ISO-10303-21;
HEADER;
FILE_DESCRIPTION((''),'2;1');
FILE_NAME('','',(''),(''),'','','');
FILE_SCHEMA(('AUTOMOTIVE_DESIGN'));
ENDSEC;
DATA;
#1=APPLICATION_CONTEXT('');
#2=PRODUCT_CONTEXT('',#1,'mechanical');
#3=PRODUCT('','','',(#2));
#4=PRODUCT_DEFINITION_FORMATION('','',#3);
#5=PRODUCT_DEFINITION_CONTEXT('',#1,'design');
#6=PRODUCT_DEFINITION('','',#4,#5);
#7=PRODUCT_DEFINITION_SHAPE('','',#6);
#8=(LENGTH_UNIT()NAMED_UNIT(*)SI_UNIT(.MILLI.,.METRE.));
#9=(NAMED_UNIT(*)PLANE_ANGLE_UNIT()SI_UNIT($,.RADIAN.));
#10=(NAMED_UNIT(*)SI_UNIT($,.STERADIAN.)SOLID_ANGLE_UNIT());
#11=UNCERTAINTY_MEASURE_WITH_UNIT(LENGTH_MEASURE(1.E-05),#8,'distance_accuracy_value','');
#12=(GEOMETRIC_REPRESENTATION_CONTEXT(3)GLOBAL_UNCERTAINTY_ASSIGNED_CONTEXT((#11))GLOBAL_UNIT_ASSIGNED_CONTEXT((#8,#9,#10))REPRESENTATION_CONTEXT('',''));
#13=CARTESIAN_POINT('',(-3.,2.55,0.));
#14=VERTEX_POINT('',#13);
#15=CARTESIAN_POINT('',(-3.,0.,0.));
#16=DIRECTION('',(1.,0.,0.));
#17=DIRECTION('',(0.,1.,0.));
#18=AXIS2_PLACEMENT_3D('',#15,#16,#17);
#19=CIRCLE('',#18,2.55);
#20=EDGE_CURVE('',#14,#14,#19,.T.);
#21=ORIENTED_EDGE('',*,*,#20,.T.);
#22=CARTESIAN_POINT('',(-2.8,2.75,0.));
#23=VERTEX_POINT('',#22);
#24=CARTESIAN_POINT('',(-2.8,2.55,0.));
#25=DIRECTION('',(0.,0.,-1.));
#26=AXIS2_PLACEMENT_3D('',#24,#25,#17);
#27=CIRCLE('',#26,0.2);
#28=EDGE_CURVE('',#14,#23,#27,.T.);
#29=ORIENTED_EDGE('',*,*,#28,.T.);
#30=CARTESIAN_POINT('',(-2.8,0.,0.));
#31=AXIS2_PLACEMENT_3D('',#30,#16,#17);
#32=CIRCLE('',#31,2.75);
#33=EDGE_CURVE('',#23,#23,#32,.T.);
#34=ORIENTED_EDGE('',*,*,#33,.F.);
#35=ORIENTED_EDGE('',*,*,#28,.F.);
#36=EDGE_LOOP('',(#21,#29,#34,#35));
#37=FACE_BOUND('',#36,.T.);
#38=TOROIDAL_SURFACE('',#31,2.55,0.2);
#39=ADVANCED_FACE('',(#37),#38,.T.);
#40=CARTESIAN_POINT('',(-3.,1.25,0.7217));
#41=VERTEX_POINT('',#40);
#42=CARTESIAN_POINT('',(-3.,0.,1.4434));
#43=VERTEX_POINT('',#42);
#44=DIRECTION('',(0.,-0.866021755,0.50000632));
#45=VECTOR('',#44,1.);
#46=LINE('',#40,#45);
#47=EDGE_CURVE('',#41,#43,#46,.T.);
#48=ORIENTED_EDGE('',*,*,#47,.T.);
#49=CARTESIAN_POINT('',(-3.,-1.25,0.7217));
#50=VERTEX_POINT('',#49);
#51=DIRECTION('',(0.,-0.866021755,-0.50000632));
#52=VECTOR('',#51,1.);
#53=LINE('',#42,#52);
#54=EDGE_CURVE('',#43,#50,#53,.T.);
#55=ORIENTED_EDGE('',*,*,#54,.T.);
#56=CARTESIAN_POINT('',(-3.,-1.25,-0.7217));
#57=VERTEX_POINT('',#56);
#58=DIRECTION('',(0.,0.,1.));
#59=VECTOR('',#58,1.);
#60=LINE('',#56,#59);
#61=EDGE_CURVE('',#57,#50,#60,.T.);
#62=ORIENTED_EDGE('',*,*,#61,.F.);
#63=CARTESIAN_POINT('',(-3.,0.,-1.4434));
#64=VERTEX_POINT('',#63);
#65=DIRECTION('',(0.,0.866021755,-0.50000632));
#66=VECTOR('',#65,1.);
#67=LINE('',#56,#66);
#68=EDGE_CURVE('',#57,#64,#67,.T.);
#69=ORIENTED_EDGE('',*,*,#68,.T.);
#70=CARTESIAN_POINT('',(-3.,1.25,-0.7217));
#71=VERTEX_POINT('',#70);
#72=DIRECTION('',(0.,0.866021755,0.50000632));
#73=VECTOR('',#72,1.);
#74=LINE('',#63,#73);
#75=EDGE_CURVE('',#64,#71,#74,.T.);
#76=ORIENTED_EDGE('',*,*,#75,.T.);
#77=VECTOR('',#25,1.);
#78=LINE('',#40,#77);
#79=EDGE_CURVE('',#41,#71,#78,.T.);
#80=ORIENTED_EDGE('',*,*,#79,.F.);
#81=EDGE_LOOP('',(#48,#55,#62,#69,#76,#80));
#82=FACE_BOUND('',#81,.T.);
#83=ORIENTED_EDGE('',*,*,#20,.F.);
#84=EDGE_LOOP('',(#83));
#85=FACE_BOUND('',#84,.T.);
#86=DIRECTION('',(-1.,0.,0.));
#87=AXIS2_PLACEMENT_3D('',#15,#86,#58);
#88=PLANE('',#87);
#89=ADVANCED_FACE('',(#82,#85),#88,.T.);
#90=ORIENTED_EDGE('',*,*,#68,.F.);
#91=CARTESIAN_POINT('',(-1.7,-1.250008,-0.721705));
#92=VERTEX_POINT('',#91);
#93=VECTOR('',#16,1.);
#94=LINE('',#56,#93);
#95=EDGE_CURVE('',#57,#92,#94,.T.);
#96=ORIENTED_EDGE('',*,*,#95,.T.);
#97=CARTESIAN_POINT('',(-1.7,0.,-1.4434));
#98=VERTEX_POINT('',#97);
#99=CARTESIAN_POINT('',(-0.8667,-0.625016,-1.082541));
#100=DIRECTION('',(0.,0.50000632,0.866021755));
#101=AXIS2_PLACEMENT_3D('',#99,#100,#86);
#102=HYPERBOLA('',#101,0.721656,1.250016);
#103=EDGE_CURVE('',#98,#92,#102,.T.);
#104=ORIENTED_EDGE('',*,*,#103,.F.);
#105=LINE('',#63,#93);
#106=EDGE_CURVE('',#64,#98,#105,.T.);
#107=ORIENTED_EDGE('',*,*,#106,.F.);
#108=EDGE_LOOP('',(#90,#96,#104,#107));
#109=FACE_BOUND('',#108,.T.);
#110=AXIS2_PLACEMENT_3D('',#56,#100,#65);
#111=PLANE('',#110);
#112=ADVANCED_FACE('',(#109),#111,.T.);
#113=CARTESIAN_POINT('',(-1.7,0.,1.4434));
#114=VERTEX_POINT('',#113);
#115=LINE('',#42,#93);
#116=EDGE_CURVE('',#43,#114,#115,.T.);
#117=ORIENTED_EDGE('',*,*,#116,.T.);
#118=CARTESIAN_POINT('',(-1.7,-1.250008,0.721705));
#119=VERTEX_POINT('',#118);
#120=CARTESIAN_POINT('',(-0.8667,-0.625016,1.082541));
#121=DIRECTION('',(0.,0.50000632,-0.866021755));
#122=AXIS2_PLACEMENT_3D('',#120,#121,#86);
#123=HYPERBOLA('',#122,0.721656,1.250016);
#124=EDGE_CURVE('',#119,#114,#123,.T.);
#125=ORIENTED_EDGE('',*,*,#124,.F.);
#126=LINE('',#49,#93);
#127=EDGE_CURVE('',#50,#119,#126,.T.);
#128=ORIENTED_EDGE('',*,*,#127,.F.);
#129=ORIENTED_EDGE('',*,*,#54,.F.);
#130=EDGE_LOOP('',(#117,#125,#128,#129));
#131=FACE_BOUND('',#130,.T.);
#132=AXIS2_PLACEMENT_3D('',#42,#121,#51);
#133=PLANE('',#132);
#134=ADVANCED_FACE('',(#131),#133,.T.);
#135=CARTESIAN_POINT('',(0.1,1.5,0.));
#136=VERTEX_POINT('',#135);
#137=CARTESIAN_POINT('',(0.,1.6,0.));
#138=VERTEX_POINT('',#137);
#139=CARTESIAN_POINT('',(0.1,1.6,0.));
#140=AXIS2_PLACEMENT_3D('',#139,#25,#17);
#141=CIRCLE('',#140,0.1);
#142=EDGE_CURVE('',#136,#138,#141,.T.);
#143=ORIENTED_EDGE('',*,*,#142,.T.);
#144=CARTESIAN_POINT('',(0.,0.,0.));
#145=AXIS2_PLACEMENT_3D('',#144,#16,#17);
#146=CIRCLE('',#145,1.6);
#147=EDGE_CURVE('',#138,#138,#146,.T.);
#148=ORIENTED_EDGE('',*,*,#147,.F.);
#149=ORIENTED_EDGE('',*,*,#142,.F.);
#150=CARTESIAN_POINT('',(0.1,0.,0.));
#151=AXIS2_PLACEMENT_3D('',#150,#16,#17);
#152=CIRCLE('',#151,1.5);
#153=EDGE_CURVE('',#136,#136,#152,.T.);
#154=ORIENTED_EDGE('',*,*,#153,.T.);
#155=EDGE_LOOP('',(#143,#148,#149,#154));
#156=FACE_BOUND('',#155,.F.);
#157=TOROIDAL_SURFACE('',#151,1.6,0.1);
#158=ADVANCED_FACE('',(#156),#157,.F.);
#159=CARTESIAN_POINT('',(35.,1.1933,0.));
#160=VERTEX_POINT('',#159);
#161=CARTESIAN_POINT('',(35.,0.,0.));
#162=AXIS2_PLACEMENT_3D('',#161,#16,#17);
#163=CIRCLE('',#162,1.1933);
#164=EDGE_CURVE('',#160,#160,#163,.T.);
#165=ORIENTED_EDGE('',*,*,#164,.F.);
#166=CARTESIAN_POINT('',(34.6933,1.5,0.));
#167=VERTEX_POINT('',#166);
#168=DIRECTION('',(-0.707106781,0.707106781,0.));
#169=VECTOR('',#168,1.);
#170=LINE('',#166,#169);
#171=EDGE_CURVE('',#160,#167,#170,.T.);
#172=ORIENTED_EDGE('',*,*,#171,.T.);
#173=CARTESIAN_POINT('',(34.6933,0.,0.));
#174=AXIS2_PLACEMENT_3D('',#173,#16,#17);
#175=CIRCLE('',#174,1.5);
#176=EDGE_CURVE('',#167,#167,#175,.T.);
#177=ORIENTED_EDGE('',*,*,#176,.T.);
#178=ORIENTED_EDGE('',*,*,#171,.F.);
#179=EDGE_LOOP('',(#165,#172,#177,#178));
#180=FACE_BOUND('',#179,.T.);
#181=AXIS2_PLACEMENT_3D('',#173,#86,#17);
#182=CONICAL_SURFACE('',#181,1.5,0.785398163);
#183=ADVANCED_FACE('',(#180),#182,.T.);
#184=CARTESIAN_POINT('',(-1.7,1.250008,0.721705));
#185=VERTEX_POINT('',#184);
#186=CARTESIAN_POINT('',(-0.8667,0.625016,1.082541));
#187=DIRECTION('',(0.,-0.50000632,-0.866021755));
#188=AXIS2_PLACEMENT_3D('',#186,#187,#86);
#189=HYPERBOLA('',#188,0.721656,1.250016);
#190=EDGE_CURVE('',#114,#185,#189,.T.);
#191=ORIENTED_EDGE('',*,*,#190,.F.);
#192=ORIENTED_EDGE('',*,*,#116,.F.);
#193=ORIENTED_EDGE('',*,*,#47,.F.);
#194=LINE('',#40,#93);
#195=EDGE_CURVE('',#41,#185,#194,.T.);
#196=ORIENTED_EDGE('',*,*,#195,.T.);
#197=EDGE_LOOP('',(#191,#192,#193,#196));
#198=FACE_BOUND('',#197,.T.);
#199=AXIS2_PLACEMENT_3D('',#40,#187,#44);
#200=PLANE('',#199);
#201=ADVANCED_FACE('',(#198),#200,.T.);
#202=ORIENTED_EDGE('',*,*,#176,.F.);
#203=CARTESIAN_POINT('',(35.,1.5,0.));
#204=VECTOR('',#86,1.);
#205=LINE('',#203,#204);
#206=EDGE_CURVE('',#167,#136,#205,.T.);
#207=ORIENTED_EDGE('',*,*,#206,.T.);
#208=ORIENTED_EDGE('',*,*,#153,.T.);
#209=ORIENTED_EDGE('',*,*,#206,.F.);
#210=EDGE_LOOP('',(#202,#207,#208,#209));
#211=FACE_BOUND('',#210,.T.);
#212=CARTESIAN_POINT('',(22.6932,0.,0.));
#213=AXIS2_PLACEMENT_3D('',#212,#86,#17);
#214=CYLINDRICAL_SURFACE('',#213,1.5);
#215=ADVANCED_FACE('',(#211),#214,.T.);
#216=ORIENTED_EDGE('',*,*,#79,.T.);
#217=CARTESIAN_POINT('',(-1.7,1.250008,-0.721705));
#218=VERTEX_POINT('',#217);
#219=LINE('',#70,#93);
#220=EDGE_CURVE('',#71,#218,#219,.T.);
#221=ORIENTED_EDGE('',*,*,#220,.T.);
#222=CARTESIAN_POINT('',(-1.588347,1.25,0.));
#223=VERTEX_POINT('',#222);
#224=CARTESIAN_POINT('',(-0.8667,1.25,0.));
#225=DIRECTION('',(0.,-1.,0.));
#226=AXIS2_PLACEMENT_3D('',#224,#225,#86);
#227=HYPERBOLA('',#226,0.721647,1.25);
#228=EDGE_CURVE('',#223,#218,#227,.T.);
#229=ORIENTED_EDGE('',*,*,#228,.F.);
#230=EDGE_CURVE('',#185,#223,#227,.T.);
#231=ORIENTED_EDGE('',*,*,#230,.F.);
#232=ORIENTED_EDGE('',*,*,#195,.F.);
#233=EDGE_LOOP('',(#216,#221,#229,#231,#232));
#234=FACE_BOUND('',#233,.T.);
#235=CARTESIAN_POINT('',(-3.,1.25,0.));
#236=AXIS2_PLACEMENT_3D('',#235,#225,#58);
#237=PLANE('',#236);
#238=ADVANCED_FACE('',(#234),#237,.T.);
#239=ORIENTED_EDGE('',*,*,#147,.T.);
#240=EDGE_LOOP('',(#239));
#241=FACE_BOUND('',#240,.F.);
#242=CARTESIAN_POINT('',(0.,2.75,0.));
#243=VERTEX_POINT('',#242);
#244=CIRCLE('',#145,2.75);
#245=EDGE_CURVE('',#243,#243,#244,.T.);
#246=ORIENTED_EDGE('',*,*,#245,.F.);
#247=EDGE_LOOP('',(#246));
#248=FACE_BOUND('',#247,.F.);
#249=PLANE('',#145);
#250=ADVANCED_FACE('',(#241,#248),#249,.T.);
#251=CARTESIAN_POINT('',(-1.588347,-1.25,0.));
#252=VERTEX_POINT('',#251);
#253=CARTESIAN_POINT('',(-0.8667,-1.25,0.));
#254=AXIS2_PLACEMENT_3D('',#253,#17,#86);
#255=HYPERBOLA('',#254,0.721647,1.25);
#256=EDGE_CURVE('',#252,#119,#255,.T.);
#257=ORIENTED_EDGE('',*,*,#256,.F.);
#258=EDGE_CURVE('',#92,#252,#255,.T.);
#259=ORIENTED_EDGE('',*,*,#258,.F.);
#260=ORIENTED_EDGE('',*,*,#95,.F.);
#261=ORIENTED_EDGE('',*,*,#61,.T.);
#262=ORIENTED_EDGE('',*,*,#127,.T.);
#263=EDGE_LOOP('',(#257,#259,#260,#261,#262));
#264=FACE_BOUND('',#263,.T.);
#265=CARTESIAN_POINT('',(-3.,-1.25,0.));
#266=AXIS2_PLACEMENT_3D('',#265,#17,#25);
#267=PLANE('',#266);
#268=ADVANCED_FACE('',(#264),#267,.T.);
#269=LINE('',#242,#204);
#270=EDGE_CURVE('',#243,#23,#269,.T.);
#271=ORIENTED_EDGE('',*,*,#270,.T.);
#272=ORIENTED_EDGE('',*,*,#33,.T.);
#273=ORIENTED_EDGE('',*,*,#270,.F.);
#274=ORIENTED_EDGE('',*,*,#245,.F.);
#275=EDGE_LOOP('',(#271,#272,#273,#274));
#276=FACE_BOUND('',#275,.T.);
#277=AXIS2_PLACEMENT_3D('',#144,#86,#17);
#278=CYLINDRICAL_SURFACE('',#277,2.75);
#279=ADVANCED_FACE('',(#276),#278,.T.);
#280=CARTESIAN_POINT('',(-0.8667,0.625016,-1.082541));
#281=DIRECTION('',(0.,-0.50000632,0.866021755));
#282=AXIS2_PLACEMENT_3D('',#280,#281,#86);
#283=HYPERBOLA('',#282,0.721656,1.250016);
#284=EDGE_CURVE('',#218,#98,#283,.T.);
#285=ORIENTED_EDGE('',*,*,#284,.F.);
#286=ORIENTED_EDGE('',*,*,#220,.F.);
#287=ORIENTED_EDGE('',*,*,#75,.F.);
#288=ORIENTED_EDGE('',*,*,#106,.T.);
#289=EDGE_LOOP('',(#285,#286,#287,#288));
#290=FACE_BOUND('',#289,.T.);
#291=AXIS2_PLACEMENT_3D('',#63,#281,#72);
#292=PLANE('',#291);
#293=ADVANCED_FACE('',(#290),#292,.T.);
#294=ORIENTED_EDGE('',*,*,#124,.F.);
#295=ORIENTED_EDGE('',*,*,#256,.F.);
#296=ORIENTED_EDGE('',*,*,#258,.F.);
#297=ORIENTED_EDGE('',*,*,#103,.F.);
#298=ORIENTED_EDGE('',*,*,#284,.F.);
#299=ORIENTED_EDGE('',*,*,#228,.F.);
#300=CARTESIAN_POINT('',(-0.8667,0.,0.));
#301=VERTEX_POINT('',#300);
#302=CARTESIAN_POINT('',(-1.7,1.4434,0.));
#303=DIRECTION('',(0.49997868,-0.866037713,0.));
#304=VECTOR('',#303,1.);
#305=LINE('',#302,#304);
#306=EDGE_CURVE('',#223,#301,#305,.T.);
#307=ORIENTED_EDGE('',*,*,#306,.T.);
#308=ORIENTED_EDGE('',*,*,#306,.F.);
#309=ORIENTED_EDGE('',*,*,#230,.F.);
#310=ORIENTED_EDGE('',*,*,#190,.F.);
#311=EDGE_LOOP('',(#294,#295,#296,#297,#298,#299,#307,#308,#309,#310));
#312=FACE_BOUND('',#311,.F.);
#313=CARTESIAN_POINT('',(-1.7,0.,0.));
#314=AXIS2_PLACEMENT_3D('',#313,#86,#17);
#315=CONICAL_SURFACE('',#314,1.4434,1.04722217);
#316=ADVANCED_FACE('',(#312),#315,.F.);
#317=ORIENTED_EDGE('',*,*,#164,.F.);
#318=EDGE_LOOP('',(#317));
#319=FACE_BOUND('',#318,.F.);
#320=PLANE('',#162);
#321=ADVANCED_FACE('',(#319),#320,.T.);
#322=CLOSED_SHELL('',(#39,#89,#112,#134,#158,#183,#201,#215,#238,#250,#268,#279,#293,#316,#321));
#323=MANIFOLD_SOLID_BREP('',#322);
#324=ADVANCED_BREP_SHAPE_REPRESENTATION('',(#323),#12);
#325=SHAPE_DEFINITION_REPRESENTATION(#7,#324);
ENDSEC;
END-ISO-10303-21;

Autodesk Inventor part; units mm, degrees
ref_plane "YZ Plane" through (0, 0, 0) normal (1, 0, 0) x (0, 1, 0)
ref_plane "XZ Plane" through (0, 0, 0) normal (0, 1, 0) x (-1, 0, 0)
sketch "Эскиз1" plane through (0, 0, 0) normal (0, 0, 1) x (1, 0, 0)
  line L0 (-0.8667, 0) -> (35, 0)
  line L1 (35, 0) -> (35, 1.5)
  line L2 (35, 1.5) -> (23, 1.5)
  line L3 (23, 1.5) -> (22.6932, 1.5)
  line L4 (22.6932, 1.5) -> (0, 1.5)
  line L5 (0, 1.5) -> (0, 2.75)
  line L6 (0, 2.75) -> (-3, 2.75)
  line L7 (-3, 2.75) -> (-3, 1.4434)
  line L8 (-3, 1.4434) -> (-1.7, 1.4434)
  line L9 (-1.7, 1.4434) -> (-0.8667, 0)
  line L10 (-10.6, 0) -> (42.6, 0) projected
  line L11 (0, -0.55) -> (0, 3.3) projected
  line L12 (23, 1.5) -> (0, 1.5) construction
  dimension "d1" = 12
  dimension "d2" = 0.3068
  dimension "d3" = 3
  dimension "d4" = 1.3
  dimension "d5" = 60
  dimension "d6" = 3
  dimension "d7" = 3
  dimension "d8" = 2.8868
  dimension "d9" = 5.5
  dimension "d26" = 35
revolve "Базовый элемент" add sketch "Эскиз1" angle 360 about axis through (-0.8667, 0, 0) along (1, 0, 0)
sketch "Эскиз2" plane through (-3, 0, 0) normal (-1, 0, 0) x (0, 0, 1)
  circle A0 centre (0, 0) radius 1.4434 projected
  line L0 (0, -3.85) -> (0, 3.85) projected
  line L1 (-3.85, 0) -> (3.85, 0) projected
  line L2 (1.4434, 0) -> (0.7217, -1.25)
  line L3 (0.7217, -1.25) -> (-0.7217, -1.25)
  line L4 (-0.7217, -1.25) -> (-1.4434, 0)
  line L5 (-1.4434, 0) -> (-0.7217, 1.25)
  line L6 (-0.7217, 1.25) -> (0.7217, 1.25)
  line L7 (0.7217, 1.25) -> (1.4434, 0)
extrude "Паз" add sketch "Эскиз2" against normal up to next contours L7 A0 | A0 L2 | L6 L0 A0 | A0 L0 L3 | L0 L6 A0 | A0 L3 L0 | L4 A0 | A0 L5
fillet "Сопряжение1" radius 0.2 1 edges at (-3, -2.75, 0)
thread "Резьба" size "M3x0.5" class "6g" standard "ISO Metric profile" length 12
chamfer "Фаска1" distance 0.3067 distance2 0.3067 1 edges at (35, -1.5, 0) measured on face at (35, -0.8773, -0.3972)
ref_plane "Work Plane1" through (29, 0, 0) normal (0, -1, 0) x (1, 0, 0)
fillet "Fillet2" radius 0.1 1 edges at (0, -1.5, 0)
equation "\"d1\" = GEL"
equation "\"d3\" = KOH"
equation "\"d4\" = INTI"
equation "\"d6\" = GD"
equation "\"d7\" = BDM"
equation "\"d8\" = 1.1547 * SW"
equation "\"d9\" = KOD"
equation "\"d26\" = NLG"
equation "\"d30\" = R"
equation "\"d17\" = RR"
equation "\"d13\" = GEL"
equation "\"d15\" = -0.5 * SPD + 0.5 * GD"
equation "\"d16\" = GUL"
equation "\"GD\" = NND"
equation "\"NLG\" = 35"
equation "\"GEL\" = 12"
equation "\"KOD\" = 5.5"
equation "\"KOH\" = NND"
equation "\"INTI\" = 1.3"
equation "\"GAL\" = 0.61345 * PTC"
equation "\"GUL\" = 0.61345 * PTC"
equation "\"BDM\" = NND"
equation "\"SW\" = 2.5"
equation "\"RR\" = 0.2"
equation "\"SPD\" = NND - 1.2269 * PTC"
equation "\"R\" = 0.1"
equation "\"TOA\" = 30deg"
equation "\"GD1\" = THREADDIA - 1.2269 * PTC"
equation "\"THREADDIA\" = 3"
equation "\"FAWI\" = 45deg"
equation "\"PTC\" = 0.5"
equation "\"NND\" = 3"
equation "\"E0\" = 1.155 * SW"
properties part number "CNS 3932 - M 3 x 35" material "Сталь, мягкая"
